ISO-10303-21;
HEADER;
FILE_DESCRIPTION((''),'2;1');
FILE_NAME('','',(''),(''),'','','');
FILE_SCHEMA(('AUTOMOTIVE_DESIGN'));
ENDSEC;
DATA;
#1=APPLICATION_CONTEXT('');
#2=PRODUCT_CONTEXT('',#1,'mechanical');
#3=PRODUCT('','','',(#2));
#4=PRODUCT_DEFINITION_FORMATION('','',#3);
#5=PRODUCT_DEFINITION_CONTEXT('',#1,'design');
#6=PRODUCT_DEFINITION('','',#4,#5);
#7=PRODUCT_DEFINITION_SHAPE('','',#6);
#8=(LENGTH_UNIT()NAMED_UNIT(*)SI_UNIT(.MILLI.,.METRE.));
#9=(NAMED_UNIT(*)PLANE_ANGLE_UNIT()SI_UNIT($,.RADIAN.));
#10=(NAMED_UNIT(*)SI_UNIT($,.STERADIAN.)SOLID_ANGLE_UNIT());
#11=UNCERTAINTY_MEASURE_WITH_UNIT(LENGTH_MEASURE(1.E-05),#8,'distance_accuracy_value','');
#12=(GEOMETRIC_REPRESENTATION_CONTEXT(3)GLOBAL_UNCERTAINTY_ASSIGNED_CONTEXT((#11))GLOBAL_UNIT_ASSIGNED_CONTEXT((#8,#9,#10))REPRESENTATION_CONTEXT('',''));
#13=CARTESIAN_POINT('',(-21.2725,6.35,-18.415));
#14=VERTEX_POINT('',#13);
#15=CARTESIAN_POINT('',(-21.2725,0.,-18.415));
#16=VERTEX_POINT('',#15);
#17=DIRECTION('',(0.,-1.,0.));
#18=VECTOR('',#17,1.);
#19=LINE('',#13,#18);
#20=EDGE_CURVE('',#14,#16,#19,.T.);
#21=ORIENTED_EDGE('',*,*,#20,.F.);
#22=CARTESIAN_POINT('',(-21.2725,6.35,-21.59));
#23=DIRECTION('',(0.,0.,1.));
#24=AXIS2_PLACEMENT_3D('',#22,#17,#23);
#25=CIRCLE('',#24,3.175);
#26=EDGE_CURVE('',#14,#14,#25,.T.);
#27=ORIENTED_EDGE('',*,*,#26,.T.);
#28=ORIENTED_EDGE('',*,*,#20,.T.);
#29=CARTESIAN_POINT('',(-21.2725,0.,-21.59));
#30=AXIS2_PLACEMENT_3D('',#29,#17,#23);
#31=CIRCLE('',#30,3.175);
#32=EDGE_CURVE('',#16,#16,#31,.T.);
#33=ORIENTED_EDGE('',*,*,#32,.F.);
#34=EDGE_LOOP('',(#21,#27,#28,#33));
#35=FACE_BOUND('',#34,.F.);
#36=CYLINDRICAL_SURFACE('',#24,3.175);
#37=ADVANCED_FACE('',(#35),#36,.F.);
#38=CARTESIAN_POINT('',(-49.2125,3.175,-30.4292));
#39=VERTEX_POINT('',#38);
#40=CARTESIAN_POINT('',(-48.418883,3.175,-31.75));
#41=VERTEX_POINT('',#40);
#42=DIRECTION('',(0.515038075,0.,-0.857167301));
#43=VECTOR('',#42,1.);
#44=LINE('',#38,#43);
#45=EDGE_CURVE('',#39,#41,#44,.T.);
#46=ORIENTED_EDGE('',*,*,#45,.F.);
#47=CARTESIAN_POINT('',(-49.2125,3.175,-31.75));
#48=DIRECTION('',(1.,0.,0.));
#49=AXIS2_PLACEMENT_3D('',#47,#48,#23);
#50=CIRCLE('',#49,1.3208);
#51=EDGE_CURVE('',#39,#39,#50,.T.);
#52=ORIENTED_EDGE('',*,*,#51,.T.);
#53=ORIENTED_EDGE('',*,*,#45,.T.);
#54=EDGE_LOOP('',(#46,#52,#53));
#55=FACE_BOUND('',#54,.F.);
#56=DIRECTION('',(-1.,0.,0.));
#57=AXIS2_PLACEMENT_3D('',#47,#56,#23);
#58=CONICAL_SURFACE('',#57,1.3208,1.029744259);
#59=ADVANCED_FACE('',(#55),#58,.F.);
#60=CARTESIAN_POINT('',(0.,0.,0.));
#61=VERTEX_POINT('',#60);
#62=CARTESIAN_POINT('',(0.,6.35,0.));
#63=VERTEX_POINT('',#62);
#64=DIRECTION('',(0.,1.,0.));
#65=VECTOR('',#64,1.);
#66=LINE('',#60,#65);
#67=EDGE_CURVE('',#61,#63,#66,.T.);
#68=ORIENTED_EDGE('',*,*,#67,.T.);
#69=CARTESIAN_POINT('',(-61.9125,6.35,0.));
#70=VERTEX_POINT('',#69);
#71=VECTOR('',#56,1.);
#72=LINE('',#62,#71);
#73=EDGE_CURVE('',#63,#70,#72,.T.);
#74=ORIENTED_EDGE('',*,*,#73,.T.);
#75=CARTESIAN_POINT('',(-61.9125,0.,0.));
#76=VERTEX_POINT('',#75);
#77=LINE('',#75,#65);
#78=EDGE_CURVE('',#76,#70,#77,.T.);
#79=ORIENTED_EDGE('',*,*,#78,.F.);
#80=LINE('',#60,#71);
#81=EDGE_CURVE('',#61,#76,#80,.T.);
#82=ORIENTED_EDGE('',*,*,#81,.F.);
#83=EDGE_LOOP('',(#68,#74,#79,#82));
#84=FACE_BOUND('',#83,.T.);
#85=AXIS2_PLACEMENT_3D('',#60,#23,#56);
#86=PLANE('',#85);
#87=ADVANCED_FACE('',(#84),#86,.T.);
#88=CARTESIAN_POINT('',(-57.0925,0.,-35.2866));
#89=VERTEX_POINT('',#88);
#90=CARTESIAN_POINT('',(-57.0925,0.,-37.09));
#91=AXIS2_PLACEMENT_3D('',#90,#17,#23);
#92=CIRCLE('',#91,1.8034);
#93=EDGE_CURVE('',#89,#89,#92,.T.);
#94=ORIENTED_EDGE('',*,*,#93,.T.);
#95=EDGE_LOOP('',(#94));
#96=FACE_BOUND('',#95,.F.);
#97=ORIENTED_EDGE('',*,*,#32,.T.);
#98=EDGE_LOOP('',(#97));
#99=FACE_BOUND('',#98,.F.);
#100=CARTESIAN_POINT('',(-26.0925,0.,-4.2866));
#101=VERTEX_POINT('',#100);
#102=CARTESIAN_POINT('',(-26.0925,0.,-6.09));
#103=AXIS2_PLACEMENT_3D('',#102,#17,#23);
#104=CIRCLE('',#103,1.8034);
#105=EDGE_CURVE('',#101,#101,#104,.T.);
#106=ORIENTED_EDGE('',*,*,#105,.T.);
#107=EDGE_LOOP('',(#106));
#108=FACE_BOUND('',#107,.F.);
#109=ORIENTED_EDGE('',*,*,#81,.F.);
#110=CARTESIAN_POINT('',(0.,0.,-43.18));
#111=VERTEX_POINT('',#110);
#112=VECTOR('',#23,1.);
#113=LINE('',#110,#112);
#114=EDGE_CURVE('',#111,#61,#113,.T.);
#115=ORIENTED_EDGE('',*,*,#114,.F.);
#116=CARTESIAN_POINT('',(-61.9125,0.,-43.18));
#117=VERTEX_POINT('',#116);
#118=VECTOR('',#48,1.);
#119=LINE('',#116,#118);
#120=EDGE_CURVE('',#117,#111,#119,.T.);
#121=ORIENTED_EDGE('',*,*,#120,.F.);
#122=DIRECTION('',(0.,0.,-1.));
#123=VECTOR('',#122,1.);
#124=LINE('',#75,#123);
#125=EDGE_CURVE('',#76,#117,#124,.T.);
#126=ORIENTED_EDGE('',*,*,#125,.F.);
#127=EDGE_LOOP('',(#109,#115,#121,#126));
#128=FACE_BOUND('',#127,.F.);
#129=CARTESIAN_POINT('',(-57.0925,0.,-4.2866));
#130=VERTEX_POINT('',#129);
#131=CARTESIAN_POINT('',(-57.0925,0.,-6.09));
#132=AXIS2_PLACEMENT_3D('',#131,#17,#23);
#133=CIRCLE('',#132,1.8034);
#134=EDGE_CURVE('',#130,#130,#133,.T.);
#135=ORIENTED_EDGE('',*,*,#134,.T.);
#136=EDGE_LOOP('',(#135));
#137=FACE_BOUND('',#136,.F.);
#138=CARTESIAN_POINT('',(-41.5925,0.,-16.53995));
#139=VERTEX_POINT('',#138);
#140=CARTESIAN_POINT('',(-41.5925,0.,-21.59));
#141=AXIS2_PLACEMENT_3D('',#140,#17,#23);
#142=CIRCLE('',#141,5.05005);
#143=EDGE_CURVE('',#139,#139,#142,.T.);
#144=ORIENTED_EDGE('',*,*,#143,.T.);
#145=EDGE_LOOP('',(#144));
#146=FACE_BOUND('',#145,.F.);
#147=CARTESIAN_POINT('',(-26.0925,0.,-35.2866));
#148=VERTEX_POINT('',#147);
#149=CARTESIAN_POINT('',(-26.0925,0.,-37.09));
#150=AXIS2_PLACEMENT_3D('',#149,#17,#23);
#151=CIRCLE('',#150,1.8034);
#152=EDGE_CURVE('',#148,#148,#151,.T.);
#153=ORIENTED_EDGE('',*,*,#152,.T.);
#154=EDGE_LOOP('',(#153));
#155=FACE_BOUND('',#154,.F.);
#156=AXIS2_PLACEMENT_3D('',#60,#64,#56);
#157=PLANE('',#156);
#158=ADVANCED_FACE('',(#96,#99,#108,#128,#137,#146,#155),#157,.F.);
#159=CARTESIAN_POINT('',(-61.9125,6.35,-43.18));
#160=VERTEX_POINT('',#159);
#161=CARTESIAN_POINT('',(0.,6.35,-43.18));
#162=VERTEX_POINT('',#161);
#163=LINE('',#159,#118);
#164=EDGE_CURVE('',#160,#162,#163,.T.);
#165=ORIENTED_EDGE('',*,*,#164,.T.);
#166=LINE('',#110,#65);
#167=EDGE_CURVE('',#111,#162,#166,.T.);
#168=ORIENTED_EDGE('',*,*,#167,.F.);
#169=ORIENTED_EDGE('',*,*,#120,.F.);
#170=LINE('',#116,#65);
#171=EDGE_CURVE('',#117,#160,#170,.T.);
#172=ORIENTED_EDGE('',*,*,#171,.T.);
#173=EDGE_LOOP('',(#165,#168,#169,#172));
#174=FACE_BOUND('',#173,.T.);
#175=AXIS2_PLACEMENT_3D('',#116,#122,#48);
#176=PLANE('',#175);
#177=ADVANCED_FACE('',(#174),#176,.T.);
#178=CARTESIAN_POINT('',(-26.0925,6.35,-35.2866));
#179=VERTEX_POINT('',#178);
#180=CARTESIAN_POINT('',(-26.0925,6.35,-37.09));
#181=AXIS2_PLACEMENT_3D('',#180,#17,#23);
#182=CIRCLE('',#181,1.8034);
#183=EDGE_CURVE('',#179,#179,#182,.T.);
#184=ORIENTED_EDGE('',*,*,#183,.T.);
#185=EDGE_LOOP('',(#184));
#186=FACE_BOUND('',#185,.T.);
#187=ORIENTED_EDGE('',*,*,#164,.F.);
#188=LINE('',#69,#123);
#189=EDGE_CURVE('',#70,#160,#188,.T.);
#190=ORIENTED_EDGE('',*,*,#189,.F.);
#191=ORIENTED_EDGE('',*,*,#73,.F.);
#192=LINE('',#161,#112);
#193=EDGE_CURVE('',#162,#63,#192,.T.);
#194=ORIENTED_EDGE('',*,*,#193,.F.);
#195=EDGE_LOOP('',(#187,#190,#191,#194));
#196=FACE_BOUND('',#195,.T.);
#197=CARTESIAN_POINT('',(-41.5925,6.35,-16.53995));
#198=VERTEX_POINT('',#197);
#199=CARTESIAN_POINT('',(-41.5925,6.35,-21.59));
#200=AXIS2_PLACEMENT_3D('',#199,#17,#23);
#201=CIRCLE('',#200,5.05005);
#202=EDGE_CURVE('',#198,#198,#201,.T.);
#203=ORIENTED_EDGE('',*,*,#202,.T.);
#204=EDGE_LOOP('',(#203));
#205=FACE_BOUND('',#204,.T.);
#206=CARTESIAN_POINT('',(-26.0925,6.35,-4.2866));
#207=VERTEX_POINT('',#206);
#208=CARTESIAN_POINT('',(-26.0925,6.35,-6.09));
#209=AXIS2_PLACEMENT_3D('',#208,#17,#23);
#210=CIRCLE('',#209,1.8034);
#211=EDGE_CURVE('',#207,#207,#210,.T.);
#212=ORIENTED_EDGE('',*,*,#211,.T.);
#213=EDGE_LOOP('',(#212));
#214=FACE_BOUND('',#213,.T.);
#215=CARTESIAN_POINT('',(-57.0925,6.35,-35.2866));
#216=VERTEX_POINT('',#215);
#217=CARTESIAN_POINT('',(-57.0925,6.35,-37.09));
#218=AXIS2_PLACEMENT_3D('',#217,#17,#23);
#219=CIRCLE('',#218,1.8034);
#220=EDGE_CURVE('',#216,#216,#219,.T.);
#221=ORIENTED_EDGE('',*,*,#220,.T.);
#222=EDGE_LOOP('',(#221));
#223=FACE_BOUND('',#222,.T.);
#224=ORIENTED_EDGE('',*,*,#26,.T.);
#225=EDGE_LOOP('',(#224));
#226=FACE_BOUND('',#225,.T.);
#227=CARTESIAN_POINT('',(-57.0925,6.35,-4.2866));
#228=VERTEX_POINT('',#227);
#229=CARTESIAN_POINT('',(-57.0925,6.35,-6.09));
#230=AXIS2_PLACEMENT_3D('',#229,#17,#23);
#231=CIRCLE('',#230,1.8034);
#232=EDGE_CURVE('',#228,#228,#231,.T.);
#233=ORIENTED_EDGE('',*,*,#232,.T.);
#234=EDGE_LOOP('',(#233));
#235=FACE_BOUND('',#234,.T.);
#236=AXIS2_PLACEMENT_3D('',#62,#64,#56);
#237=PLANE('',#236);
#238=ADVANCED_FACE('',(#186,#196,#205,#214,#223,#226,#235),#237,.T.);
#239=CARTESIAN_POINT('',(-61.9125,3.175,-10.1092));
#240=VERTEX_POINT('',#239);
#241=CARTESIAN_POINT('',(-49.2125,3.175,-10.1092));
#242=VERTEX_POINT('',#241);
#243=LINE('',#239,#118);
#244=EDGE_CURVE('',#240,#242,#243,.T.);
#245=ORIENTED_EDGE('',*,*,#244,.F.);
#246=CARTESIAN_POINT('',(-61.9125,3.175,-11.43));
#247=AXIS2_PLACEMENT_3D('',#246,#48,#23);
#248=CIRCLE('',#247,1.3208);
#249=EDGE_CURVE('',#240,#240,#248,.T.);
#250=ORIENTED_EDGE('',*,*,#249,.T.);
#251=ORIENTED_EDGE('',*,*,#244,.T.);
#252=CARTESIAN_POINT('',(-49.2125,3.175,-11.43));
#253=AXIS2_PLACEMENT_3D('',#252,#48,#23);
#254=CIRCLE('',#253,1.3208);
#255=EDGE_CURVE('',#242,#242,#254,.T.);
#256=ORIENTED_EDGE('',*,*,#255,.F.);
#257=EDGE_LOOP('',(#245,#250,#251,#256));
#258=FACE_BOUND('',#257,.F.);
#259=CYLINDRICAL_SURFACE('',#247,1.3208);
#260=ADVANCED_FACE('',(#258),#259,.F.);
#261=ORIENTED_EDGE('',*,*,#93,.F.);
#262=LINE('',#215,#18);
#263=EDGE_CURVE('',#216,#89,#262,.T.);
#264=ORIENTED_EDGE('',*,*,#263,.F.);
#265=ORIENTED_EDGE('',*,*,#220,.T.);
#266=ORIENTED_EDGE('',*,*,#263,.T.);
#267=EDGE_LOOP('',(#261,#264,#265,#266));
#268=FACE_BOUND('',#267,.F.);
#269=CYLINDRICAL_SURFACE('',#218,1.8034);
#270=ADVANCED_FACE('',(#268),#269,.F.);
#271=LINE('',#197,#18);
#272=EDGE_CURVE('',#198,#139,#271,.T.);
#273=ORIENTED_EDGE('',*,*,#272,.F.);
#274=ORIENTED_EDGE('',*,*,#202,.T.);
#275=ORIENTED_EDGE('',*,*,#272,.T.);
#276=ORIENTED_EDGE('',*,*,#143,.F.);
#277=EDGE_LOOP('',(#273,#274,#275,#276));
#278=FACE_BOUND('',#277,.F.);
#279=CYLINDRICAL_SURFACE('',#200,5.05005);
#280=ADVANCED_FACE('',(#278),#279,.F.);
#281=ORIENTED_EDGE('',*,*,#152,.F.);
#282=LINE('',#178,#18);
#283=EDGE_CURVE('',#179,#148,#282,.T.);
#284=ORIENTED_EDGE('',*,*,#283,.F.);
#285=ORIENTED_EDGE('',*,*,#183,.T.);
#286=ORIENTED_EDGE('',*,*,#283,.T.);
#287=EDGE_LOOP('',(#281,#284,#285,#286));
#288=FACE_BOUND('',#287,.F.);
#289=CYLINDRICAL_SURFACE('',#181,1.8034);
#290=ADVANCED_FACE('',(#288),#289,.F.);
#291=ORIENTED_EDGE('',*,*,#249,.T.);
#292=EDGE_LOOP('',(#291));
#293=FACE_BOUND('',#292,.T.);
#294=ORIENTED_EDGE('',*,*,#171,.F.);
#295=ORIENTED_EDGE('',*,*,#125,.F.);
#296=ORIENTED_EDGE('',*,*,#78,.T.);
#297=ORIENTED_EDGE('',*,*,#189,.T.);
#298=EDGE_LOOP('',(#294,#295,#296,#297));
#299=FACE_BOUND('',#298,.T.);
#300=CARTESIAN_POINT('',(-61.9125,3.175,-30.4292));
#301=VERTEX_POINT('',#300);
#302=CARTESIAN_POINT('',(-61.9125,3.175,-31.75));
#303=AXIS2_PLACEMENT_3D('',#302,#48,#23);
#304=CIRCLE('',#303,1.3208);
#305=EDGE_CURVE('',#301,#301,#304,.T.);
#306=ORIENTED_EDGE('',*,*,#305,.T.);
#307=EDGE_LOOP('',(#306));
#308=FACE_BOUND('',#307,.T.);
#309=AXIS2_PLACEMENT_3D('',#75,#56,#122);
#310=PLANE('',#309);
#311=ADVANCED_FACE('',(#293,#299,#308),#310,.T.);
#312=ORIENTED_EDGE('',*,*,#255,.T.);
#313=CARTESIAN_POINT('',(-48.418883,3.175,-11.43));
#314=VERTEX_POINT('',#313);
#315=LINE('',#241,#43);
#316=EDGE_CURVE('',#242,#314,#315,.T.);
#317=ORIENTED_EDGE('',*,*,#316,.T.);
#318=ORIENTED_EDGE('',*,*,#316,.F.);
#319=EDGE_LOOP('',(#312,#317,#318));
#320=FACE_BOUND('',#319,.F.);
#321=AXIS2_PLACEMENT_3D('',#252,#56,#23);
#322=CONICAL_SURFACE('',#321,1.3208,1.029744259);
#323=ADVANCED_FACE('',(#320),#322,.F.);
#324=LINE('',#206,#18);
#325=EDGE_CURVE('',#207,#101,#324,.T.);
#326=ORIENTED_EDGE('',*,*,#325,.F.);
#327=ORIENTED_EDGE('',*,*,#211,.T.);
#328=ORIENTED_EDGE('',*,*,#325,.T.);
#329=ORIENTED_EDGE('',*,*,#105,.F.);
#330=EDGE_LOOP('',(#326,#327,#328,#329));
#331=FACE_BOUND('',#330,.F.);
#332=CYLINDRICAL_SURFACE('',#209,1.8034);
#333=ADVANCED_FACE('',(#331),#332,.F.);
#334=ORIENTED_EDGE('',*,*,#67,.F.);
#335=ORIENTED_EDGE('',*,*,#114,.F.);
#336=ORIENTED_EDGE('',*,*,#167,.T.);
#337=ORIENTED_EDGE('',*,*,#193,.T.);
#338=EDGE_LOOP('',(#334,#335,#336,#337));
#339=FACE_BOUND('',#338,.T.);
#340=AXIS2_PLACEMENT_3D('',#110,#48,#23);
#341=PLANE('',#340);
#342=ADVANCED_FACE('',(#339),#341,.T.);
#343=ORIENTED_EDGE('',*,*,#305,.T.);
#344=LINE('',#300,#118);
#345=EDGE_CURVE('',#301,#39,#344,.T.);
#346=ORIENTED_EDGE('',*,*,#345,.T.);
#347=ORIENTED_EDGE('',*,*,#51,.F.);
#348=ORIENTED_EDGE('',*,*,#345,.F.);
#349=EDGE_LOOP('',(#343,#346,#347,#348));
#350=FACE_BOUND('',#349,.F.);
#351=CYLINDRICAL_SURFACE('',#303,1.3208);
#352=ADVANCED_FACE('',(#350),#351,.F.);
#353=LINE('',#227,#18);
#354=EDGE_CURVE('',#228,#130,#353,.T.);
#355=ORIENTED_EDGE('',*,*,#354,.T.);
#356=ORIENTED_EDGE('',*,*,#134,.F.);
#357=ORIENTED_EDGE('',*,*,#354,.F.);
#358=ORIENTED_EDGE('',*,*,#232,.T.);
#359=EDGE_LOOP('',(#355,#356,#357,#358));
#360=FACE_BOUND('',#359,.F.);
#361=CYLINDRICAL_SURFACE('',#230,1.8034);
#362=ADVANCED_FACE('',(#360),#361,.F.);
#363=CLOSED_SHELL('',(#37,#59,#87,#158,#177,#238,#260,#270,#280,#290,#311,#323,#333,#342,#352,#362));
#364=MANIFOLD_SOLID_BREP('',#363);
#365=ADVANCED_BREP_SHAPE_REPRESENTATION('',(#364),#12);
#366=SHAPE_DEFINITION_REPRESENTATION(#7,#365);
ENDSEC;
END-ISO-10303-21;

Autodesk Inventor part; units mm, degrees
ref_plane "YZ Plane" through (0, 0, 0) normal (1, 0, 0) x (0, 1, 0)
ref_plane "XZ Plane" through (0, 0, 0) normal (0, 1, 0) x (-1, 0, 0)
ref_plane "XY Plane" through (0, 0, 0) normal (0, 0, 1) x (1, 0, 0)
sketch "Sketch1" plane through (0, 0, 0) normal (0, 1, 0) x (-1, 0, 0)
  line L0 (0, 0) -> (61.9125, 0)
  line L1 (61.9125, 0) -> (61.9125, -43.18)
  line L2 (61.9125, -43.18) -> (0, -43.18)
  line L3 (0, -43.18) -> (0, 0)
  dimension "d0" = 61.9125
  dimension "d1" = 43.18
extrude "Extrusion1" add sketch "Sketch1" along normal blind 6.35
sketch "Sketch2" plane through (0, 6.35, 0) normal (0, 1, 0) x (1, 0, 0)
  line L0 (-61.9125, 43.18) -> (-61.9125, 0)
  line L1 (-61.9125, 0) -> (0, 0)
  line L2 (0, 0) -> (0, 43.18)
  line L3 (-61.9125, 43.18) -> (0, 43.18)
  line L4 (-61.9125, 43.18) -> (-61.9125, 0) projected
  line L5 (0, 43.18) -> (-61.9125, 43.18) projected
  line L6 (-61.9125, 0) -> (0, 0) projected
  line L7 (0, 0) -> (0, 43.18) projected
  point P0 (-41.5925, 21.59)
  point P1 (-57.0925, 37.09)
  point P2 (-57.0925, 6.09)
  point P3 (-26.0925, 6.09)
  point P4 (-21.2725, 21.59)
  point P5 (-26.0925, 37.09)
  dimension "d4" = 6.09
  dimension "d5" = 4.82
  dimension "d6" = 6.09
  dimension "d7" = 4.82
  dimension "d8" = 6.09
  dimension "d9" = 26.0925
  dimension "d10" = 21.2725
  dimension "d11" = 21.59
  dimension "d12" = 6.09
  dimension "d13" = 26.0925
  dimension "d14" = 21.59
  dimension "d15" = 20.32
hole "Hole1" at (-57.0925, 6.35, -37.09) at (-57.0925, 6.35, -6.09) at (-26.0925, 6.35, -6.09) at (-26.0925, 6.35, -37.09) direction (0, -1, 0) diameter 3.6068 depth 10.9728 tip angle 118 clearance for "Hex Head Cap Screw ISO 24017" size "M3" standard "ISO"
hole "Hole2" at (-41.5925, 6.35, -21.59) direction (0, -1, 0) diameter 10.1001 depth 10.9728 tip angle 118
sketch "Sketch3" plane through (-61.9125, 0, -43.18) normal (-1, 0, 0) x (0, 0, 1)
  line L0 (0, 0) -> (0, 6.35) projected
  line L1 (43.18, 0) -> (43.18, 6.35) projected
  line L2 (0, 6.35) -> (43.18, 6.35) projected
  point P0 (11.43, 3.175)
  point P1 (31.75, 3.175)
  dimension "d37" = 11.43
  dimension "d38" = 11.43
  dimension "d39" = 3.175
hole "Hole3" at (-61.9125, 3.175, -31.75) at (-61.9125, 3.175, -11.43) direction (1, 0, 0) diameter 2.6416 depth 12.7 tip angle 118 thread size "6-32 UNC" class "3B" standard "ANSI Unified Screw Threads"
hole "Hole4" at (-21.2725, 6.35, -21.59) direction (0, -1, 0) diameter 6.35 depth 10.9728 tip angle 118
properties part number "AR-BracketLeft2"
